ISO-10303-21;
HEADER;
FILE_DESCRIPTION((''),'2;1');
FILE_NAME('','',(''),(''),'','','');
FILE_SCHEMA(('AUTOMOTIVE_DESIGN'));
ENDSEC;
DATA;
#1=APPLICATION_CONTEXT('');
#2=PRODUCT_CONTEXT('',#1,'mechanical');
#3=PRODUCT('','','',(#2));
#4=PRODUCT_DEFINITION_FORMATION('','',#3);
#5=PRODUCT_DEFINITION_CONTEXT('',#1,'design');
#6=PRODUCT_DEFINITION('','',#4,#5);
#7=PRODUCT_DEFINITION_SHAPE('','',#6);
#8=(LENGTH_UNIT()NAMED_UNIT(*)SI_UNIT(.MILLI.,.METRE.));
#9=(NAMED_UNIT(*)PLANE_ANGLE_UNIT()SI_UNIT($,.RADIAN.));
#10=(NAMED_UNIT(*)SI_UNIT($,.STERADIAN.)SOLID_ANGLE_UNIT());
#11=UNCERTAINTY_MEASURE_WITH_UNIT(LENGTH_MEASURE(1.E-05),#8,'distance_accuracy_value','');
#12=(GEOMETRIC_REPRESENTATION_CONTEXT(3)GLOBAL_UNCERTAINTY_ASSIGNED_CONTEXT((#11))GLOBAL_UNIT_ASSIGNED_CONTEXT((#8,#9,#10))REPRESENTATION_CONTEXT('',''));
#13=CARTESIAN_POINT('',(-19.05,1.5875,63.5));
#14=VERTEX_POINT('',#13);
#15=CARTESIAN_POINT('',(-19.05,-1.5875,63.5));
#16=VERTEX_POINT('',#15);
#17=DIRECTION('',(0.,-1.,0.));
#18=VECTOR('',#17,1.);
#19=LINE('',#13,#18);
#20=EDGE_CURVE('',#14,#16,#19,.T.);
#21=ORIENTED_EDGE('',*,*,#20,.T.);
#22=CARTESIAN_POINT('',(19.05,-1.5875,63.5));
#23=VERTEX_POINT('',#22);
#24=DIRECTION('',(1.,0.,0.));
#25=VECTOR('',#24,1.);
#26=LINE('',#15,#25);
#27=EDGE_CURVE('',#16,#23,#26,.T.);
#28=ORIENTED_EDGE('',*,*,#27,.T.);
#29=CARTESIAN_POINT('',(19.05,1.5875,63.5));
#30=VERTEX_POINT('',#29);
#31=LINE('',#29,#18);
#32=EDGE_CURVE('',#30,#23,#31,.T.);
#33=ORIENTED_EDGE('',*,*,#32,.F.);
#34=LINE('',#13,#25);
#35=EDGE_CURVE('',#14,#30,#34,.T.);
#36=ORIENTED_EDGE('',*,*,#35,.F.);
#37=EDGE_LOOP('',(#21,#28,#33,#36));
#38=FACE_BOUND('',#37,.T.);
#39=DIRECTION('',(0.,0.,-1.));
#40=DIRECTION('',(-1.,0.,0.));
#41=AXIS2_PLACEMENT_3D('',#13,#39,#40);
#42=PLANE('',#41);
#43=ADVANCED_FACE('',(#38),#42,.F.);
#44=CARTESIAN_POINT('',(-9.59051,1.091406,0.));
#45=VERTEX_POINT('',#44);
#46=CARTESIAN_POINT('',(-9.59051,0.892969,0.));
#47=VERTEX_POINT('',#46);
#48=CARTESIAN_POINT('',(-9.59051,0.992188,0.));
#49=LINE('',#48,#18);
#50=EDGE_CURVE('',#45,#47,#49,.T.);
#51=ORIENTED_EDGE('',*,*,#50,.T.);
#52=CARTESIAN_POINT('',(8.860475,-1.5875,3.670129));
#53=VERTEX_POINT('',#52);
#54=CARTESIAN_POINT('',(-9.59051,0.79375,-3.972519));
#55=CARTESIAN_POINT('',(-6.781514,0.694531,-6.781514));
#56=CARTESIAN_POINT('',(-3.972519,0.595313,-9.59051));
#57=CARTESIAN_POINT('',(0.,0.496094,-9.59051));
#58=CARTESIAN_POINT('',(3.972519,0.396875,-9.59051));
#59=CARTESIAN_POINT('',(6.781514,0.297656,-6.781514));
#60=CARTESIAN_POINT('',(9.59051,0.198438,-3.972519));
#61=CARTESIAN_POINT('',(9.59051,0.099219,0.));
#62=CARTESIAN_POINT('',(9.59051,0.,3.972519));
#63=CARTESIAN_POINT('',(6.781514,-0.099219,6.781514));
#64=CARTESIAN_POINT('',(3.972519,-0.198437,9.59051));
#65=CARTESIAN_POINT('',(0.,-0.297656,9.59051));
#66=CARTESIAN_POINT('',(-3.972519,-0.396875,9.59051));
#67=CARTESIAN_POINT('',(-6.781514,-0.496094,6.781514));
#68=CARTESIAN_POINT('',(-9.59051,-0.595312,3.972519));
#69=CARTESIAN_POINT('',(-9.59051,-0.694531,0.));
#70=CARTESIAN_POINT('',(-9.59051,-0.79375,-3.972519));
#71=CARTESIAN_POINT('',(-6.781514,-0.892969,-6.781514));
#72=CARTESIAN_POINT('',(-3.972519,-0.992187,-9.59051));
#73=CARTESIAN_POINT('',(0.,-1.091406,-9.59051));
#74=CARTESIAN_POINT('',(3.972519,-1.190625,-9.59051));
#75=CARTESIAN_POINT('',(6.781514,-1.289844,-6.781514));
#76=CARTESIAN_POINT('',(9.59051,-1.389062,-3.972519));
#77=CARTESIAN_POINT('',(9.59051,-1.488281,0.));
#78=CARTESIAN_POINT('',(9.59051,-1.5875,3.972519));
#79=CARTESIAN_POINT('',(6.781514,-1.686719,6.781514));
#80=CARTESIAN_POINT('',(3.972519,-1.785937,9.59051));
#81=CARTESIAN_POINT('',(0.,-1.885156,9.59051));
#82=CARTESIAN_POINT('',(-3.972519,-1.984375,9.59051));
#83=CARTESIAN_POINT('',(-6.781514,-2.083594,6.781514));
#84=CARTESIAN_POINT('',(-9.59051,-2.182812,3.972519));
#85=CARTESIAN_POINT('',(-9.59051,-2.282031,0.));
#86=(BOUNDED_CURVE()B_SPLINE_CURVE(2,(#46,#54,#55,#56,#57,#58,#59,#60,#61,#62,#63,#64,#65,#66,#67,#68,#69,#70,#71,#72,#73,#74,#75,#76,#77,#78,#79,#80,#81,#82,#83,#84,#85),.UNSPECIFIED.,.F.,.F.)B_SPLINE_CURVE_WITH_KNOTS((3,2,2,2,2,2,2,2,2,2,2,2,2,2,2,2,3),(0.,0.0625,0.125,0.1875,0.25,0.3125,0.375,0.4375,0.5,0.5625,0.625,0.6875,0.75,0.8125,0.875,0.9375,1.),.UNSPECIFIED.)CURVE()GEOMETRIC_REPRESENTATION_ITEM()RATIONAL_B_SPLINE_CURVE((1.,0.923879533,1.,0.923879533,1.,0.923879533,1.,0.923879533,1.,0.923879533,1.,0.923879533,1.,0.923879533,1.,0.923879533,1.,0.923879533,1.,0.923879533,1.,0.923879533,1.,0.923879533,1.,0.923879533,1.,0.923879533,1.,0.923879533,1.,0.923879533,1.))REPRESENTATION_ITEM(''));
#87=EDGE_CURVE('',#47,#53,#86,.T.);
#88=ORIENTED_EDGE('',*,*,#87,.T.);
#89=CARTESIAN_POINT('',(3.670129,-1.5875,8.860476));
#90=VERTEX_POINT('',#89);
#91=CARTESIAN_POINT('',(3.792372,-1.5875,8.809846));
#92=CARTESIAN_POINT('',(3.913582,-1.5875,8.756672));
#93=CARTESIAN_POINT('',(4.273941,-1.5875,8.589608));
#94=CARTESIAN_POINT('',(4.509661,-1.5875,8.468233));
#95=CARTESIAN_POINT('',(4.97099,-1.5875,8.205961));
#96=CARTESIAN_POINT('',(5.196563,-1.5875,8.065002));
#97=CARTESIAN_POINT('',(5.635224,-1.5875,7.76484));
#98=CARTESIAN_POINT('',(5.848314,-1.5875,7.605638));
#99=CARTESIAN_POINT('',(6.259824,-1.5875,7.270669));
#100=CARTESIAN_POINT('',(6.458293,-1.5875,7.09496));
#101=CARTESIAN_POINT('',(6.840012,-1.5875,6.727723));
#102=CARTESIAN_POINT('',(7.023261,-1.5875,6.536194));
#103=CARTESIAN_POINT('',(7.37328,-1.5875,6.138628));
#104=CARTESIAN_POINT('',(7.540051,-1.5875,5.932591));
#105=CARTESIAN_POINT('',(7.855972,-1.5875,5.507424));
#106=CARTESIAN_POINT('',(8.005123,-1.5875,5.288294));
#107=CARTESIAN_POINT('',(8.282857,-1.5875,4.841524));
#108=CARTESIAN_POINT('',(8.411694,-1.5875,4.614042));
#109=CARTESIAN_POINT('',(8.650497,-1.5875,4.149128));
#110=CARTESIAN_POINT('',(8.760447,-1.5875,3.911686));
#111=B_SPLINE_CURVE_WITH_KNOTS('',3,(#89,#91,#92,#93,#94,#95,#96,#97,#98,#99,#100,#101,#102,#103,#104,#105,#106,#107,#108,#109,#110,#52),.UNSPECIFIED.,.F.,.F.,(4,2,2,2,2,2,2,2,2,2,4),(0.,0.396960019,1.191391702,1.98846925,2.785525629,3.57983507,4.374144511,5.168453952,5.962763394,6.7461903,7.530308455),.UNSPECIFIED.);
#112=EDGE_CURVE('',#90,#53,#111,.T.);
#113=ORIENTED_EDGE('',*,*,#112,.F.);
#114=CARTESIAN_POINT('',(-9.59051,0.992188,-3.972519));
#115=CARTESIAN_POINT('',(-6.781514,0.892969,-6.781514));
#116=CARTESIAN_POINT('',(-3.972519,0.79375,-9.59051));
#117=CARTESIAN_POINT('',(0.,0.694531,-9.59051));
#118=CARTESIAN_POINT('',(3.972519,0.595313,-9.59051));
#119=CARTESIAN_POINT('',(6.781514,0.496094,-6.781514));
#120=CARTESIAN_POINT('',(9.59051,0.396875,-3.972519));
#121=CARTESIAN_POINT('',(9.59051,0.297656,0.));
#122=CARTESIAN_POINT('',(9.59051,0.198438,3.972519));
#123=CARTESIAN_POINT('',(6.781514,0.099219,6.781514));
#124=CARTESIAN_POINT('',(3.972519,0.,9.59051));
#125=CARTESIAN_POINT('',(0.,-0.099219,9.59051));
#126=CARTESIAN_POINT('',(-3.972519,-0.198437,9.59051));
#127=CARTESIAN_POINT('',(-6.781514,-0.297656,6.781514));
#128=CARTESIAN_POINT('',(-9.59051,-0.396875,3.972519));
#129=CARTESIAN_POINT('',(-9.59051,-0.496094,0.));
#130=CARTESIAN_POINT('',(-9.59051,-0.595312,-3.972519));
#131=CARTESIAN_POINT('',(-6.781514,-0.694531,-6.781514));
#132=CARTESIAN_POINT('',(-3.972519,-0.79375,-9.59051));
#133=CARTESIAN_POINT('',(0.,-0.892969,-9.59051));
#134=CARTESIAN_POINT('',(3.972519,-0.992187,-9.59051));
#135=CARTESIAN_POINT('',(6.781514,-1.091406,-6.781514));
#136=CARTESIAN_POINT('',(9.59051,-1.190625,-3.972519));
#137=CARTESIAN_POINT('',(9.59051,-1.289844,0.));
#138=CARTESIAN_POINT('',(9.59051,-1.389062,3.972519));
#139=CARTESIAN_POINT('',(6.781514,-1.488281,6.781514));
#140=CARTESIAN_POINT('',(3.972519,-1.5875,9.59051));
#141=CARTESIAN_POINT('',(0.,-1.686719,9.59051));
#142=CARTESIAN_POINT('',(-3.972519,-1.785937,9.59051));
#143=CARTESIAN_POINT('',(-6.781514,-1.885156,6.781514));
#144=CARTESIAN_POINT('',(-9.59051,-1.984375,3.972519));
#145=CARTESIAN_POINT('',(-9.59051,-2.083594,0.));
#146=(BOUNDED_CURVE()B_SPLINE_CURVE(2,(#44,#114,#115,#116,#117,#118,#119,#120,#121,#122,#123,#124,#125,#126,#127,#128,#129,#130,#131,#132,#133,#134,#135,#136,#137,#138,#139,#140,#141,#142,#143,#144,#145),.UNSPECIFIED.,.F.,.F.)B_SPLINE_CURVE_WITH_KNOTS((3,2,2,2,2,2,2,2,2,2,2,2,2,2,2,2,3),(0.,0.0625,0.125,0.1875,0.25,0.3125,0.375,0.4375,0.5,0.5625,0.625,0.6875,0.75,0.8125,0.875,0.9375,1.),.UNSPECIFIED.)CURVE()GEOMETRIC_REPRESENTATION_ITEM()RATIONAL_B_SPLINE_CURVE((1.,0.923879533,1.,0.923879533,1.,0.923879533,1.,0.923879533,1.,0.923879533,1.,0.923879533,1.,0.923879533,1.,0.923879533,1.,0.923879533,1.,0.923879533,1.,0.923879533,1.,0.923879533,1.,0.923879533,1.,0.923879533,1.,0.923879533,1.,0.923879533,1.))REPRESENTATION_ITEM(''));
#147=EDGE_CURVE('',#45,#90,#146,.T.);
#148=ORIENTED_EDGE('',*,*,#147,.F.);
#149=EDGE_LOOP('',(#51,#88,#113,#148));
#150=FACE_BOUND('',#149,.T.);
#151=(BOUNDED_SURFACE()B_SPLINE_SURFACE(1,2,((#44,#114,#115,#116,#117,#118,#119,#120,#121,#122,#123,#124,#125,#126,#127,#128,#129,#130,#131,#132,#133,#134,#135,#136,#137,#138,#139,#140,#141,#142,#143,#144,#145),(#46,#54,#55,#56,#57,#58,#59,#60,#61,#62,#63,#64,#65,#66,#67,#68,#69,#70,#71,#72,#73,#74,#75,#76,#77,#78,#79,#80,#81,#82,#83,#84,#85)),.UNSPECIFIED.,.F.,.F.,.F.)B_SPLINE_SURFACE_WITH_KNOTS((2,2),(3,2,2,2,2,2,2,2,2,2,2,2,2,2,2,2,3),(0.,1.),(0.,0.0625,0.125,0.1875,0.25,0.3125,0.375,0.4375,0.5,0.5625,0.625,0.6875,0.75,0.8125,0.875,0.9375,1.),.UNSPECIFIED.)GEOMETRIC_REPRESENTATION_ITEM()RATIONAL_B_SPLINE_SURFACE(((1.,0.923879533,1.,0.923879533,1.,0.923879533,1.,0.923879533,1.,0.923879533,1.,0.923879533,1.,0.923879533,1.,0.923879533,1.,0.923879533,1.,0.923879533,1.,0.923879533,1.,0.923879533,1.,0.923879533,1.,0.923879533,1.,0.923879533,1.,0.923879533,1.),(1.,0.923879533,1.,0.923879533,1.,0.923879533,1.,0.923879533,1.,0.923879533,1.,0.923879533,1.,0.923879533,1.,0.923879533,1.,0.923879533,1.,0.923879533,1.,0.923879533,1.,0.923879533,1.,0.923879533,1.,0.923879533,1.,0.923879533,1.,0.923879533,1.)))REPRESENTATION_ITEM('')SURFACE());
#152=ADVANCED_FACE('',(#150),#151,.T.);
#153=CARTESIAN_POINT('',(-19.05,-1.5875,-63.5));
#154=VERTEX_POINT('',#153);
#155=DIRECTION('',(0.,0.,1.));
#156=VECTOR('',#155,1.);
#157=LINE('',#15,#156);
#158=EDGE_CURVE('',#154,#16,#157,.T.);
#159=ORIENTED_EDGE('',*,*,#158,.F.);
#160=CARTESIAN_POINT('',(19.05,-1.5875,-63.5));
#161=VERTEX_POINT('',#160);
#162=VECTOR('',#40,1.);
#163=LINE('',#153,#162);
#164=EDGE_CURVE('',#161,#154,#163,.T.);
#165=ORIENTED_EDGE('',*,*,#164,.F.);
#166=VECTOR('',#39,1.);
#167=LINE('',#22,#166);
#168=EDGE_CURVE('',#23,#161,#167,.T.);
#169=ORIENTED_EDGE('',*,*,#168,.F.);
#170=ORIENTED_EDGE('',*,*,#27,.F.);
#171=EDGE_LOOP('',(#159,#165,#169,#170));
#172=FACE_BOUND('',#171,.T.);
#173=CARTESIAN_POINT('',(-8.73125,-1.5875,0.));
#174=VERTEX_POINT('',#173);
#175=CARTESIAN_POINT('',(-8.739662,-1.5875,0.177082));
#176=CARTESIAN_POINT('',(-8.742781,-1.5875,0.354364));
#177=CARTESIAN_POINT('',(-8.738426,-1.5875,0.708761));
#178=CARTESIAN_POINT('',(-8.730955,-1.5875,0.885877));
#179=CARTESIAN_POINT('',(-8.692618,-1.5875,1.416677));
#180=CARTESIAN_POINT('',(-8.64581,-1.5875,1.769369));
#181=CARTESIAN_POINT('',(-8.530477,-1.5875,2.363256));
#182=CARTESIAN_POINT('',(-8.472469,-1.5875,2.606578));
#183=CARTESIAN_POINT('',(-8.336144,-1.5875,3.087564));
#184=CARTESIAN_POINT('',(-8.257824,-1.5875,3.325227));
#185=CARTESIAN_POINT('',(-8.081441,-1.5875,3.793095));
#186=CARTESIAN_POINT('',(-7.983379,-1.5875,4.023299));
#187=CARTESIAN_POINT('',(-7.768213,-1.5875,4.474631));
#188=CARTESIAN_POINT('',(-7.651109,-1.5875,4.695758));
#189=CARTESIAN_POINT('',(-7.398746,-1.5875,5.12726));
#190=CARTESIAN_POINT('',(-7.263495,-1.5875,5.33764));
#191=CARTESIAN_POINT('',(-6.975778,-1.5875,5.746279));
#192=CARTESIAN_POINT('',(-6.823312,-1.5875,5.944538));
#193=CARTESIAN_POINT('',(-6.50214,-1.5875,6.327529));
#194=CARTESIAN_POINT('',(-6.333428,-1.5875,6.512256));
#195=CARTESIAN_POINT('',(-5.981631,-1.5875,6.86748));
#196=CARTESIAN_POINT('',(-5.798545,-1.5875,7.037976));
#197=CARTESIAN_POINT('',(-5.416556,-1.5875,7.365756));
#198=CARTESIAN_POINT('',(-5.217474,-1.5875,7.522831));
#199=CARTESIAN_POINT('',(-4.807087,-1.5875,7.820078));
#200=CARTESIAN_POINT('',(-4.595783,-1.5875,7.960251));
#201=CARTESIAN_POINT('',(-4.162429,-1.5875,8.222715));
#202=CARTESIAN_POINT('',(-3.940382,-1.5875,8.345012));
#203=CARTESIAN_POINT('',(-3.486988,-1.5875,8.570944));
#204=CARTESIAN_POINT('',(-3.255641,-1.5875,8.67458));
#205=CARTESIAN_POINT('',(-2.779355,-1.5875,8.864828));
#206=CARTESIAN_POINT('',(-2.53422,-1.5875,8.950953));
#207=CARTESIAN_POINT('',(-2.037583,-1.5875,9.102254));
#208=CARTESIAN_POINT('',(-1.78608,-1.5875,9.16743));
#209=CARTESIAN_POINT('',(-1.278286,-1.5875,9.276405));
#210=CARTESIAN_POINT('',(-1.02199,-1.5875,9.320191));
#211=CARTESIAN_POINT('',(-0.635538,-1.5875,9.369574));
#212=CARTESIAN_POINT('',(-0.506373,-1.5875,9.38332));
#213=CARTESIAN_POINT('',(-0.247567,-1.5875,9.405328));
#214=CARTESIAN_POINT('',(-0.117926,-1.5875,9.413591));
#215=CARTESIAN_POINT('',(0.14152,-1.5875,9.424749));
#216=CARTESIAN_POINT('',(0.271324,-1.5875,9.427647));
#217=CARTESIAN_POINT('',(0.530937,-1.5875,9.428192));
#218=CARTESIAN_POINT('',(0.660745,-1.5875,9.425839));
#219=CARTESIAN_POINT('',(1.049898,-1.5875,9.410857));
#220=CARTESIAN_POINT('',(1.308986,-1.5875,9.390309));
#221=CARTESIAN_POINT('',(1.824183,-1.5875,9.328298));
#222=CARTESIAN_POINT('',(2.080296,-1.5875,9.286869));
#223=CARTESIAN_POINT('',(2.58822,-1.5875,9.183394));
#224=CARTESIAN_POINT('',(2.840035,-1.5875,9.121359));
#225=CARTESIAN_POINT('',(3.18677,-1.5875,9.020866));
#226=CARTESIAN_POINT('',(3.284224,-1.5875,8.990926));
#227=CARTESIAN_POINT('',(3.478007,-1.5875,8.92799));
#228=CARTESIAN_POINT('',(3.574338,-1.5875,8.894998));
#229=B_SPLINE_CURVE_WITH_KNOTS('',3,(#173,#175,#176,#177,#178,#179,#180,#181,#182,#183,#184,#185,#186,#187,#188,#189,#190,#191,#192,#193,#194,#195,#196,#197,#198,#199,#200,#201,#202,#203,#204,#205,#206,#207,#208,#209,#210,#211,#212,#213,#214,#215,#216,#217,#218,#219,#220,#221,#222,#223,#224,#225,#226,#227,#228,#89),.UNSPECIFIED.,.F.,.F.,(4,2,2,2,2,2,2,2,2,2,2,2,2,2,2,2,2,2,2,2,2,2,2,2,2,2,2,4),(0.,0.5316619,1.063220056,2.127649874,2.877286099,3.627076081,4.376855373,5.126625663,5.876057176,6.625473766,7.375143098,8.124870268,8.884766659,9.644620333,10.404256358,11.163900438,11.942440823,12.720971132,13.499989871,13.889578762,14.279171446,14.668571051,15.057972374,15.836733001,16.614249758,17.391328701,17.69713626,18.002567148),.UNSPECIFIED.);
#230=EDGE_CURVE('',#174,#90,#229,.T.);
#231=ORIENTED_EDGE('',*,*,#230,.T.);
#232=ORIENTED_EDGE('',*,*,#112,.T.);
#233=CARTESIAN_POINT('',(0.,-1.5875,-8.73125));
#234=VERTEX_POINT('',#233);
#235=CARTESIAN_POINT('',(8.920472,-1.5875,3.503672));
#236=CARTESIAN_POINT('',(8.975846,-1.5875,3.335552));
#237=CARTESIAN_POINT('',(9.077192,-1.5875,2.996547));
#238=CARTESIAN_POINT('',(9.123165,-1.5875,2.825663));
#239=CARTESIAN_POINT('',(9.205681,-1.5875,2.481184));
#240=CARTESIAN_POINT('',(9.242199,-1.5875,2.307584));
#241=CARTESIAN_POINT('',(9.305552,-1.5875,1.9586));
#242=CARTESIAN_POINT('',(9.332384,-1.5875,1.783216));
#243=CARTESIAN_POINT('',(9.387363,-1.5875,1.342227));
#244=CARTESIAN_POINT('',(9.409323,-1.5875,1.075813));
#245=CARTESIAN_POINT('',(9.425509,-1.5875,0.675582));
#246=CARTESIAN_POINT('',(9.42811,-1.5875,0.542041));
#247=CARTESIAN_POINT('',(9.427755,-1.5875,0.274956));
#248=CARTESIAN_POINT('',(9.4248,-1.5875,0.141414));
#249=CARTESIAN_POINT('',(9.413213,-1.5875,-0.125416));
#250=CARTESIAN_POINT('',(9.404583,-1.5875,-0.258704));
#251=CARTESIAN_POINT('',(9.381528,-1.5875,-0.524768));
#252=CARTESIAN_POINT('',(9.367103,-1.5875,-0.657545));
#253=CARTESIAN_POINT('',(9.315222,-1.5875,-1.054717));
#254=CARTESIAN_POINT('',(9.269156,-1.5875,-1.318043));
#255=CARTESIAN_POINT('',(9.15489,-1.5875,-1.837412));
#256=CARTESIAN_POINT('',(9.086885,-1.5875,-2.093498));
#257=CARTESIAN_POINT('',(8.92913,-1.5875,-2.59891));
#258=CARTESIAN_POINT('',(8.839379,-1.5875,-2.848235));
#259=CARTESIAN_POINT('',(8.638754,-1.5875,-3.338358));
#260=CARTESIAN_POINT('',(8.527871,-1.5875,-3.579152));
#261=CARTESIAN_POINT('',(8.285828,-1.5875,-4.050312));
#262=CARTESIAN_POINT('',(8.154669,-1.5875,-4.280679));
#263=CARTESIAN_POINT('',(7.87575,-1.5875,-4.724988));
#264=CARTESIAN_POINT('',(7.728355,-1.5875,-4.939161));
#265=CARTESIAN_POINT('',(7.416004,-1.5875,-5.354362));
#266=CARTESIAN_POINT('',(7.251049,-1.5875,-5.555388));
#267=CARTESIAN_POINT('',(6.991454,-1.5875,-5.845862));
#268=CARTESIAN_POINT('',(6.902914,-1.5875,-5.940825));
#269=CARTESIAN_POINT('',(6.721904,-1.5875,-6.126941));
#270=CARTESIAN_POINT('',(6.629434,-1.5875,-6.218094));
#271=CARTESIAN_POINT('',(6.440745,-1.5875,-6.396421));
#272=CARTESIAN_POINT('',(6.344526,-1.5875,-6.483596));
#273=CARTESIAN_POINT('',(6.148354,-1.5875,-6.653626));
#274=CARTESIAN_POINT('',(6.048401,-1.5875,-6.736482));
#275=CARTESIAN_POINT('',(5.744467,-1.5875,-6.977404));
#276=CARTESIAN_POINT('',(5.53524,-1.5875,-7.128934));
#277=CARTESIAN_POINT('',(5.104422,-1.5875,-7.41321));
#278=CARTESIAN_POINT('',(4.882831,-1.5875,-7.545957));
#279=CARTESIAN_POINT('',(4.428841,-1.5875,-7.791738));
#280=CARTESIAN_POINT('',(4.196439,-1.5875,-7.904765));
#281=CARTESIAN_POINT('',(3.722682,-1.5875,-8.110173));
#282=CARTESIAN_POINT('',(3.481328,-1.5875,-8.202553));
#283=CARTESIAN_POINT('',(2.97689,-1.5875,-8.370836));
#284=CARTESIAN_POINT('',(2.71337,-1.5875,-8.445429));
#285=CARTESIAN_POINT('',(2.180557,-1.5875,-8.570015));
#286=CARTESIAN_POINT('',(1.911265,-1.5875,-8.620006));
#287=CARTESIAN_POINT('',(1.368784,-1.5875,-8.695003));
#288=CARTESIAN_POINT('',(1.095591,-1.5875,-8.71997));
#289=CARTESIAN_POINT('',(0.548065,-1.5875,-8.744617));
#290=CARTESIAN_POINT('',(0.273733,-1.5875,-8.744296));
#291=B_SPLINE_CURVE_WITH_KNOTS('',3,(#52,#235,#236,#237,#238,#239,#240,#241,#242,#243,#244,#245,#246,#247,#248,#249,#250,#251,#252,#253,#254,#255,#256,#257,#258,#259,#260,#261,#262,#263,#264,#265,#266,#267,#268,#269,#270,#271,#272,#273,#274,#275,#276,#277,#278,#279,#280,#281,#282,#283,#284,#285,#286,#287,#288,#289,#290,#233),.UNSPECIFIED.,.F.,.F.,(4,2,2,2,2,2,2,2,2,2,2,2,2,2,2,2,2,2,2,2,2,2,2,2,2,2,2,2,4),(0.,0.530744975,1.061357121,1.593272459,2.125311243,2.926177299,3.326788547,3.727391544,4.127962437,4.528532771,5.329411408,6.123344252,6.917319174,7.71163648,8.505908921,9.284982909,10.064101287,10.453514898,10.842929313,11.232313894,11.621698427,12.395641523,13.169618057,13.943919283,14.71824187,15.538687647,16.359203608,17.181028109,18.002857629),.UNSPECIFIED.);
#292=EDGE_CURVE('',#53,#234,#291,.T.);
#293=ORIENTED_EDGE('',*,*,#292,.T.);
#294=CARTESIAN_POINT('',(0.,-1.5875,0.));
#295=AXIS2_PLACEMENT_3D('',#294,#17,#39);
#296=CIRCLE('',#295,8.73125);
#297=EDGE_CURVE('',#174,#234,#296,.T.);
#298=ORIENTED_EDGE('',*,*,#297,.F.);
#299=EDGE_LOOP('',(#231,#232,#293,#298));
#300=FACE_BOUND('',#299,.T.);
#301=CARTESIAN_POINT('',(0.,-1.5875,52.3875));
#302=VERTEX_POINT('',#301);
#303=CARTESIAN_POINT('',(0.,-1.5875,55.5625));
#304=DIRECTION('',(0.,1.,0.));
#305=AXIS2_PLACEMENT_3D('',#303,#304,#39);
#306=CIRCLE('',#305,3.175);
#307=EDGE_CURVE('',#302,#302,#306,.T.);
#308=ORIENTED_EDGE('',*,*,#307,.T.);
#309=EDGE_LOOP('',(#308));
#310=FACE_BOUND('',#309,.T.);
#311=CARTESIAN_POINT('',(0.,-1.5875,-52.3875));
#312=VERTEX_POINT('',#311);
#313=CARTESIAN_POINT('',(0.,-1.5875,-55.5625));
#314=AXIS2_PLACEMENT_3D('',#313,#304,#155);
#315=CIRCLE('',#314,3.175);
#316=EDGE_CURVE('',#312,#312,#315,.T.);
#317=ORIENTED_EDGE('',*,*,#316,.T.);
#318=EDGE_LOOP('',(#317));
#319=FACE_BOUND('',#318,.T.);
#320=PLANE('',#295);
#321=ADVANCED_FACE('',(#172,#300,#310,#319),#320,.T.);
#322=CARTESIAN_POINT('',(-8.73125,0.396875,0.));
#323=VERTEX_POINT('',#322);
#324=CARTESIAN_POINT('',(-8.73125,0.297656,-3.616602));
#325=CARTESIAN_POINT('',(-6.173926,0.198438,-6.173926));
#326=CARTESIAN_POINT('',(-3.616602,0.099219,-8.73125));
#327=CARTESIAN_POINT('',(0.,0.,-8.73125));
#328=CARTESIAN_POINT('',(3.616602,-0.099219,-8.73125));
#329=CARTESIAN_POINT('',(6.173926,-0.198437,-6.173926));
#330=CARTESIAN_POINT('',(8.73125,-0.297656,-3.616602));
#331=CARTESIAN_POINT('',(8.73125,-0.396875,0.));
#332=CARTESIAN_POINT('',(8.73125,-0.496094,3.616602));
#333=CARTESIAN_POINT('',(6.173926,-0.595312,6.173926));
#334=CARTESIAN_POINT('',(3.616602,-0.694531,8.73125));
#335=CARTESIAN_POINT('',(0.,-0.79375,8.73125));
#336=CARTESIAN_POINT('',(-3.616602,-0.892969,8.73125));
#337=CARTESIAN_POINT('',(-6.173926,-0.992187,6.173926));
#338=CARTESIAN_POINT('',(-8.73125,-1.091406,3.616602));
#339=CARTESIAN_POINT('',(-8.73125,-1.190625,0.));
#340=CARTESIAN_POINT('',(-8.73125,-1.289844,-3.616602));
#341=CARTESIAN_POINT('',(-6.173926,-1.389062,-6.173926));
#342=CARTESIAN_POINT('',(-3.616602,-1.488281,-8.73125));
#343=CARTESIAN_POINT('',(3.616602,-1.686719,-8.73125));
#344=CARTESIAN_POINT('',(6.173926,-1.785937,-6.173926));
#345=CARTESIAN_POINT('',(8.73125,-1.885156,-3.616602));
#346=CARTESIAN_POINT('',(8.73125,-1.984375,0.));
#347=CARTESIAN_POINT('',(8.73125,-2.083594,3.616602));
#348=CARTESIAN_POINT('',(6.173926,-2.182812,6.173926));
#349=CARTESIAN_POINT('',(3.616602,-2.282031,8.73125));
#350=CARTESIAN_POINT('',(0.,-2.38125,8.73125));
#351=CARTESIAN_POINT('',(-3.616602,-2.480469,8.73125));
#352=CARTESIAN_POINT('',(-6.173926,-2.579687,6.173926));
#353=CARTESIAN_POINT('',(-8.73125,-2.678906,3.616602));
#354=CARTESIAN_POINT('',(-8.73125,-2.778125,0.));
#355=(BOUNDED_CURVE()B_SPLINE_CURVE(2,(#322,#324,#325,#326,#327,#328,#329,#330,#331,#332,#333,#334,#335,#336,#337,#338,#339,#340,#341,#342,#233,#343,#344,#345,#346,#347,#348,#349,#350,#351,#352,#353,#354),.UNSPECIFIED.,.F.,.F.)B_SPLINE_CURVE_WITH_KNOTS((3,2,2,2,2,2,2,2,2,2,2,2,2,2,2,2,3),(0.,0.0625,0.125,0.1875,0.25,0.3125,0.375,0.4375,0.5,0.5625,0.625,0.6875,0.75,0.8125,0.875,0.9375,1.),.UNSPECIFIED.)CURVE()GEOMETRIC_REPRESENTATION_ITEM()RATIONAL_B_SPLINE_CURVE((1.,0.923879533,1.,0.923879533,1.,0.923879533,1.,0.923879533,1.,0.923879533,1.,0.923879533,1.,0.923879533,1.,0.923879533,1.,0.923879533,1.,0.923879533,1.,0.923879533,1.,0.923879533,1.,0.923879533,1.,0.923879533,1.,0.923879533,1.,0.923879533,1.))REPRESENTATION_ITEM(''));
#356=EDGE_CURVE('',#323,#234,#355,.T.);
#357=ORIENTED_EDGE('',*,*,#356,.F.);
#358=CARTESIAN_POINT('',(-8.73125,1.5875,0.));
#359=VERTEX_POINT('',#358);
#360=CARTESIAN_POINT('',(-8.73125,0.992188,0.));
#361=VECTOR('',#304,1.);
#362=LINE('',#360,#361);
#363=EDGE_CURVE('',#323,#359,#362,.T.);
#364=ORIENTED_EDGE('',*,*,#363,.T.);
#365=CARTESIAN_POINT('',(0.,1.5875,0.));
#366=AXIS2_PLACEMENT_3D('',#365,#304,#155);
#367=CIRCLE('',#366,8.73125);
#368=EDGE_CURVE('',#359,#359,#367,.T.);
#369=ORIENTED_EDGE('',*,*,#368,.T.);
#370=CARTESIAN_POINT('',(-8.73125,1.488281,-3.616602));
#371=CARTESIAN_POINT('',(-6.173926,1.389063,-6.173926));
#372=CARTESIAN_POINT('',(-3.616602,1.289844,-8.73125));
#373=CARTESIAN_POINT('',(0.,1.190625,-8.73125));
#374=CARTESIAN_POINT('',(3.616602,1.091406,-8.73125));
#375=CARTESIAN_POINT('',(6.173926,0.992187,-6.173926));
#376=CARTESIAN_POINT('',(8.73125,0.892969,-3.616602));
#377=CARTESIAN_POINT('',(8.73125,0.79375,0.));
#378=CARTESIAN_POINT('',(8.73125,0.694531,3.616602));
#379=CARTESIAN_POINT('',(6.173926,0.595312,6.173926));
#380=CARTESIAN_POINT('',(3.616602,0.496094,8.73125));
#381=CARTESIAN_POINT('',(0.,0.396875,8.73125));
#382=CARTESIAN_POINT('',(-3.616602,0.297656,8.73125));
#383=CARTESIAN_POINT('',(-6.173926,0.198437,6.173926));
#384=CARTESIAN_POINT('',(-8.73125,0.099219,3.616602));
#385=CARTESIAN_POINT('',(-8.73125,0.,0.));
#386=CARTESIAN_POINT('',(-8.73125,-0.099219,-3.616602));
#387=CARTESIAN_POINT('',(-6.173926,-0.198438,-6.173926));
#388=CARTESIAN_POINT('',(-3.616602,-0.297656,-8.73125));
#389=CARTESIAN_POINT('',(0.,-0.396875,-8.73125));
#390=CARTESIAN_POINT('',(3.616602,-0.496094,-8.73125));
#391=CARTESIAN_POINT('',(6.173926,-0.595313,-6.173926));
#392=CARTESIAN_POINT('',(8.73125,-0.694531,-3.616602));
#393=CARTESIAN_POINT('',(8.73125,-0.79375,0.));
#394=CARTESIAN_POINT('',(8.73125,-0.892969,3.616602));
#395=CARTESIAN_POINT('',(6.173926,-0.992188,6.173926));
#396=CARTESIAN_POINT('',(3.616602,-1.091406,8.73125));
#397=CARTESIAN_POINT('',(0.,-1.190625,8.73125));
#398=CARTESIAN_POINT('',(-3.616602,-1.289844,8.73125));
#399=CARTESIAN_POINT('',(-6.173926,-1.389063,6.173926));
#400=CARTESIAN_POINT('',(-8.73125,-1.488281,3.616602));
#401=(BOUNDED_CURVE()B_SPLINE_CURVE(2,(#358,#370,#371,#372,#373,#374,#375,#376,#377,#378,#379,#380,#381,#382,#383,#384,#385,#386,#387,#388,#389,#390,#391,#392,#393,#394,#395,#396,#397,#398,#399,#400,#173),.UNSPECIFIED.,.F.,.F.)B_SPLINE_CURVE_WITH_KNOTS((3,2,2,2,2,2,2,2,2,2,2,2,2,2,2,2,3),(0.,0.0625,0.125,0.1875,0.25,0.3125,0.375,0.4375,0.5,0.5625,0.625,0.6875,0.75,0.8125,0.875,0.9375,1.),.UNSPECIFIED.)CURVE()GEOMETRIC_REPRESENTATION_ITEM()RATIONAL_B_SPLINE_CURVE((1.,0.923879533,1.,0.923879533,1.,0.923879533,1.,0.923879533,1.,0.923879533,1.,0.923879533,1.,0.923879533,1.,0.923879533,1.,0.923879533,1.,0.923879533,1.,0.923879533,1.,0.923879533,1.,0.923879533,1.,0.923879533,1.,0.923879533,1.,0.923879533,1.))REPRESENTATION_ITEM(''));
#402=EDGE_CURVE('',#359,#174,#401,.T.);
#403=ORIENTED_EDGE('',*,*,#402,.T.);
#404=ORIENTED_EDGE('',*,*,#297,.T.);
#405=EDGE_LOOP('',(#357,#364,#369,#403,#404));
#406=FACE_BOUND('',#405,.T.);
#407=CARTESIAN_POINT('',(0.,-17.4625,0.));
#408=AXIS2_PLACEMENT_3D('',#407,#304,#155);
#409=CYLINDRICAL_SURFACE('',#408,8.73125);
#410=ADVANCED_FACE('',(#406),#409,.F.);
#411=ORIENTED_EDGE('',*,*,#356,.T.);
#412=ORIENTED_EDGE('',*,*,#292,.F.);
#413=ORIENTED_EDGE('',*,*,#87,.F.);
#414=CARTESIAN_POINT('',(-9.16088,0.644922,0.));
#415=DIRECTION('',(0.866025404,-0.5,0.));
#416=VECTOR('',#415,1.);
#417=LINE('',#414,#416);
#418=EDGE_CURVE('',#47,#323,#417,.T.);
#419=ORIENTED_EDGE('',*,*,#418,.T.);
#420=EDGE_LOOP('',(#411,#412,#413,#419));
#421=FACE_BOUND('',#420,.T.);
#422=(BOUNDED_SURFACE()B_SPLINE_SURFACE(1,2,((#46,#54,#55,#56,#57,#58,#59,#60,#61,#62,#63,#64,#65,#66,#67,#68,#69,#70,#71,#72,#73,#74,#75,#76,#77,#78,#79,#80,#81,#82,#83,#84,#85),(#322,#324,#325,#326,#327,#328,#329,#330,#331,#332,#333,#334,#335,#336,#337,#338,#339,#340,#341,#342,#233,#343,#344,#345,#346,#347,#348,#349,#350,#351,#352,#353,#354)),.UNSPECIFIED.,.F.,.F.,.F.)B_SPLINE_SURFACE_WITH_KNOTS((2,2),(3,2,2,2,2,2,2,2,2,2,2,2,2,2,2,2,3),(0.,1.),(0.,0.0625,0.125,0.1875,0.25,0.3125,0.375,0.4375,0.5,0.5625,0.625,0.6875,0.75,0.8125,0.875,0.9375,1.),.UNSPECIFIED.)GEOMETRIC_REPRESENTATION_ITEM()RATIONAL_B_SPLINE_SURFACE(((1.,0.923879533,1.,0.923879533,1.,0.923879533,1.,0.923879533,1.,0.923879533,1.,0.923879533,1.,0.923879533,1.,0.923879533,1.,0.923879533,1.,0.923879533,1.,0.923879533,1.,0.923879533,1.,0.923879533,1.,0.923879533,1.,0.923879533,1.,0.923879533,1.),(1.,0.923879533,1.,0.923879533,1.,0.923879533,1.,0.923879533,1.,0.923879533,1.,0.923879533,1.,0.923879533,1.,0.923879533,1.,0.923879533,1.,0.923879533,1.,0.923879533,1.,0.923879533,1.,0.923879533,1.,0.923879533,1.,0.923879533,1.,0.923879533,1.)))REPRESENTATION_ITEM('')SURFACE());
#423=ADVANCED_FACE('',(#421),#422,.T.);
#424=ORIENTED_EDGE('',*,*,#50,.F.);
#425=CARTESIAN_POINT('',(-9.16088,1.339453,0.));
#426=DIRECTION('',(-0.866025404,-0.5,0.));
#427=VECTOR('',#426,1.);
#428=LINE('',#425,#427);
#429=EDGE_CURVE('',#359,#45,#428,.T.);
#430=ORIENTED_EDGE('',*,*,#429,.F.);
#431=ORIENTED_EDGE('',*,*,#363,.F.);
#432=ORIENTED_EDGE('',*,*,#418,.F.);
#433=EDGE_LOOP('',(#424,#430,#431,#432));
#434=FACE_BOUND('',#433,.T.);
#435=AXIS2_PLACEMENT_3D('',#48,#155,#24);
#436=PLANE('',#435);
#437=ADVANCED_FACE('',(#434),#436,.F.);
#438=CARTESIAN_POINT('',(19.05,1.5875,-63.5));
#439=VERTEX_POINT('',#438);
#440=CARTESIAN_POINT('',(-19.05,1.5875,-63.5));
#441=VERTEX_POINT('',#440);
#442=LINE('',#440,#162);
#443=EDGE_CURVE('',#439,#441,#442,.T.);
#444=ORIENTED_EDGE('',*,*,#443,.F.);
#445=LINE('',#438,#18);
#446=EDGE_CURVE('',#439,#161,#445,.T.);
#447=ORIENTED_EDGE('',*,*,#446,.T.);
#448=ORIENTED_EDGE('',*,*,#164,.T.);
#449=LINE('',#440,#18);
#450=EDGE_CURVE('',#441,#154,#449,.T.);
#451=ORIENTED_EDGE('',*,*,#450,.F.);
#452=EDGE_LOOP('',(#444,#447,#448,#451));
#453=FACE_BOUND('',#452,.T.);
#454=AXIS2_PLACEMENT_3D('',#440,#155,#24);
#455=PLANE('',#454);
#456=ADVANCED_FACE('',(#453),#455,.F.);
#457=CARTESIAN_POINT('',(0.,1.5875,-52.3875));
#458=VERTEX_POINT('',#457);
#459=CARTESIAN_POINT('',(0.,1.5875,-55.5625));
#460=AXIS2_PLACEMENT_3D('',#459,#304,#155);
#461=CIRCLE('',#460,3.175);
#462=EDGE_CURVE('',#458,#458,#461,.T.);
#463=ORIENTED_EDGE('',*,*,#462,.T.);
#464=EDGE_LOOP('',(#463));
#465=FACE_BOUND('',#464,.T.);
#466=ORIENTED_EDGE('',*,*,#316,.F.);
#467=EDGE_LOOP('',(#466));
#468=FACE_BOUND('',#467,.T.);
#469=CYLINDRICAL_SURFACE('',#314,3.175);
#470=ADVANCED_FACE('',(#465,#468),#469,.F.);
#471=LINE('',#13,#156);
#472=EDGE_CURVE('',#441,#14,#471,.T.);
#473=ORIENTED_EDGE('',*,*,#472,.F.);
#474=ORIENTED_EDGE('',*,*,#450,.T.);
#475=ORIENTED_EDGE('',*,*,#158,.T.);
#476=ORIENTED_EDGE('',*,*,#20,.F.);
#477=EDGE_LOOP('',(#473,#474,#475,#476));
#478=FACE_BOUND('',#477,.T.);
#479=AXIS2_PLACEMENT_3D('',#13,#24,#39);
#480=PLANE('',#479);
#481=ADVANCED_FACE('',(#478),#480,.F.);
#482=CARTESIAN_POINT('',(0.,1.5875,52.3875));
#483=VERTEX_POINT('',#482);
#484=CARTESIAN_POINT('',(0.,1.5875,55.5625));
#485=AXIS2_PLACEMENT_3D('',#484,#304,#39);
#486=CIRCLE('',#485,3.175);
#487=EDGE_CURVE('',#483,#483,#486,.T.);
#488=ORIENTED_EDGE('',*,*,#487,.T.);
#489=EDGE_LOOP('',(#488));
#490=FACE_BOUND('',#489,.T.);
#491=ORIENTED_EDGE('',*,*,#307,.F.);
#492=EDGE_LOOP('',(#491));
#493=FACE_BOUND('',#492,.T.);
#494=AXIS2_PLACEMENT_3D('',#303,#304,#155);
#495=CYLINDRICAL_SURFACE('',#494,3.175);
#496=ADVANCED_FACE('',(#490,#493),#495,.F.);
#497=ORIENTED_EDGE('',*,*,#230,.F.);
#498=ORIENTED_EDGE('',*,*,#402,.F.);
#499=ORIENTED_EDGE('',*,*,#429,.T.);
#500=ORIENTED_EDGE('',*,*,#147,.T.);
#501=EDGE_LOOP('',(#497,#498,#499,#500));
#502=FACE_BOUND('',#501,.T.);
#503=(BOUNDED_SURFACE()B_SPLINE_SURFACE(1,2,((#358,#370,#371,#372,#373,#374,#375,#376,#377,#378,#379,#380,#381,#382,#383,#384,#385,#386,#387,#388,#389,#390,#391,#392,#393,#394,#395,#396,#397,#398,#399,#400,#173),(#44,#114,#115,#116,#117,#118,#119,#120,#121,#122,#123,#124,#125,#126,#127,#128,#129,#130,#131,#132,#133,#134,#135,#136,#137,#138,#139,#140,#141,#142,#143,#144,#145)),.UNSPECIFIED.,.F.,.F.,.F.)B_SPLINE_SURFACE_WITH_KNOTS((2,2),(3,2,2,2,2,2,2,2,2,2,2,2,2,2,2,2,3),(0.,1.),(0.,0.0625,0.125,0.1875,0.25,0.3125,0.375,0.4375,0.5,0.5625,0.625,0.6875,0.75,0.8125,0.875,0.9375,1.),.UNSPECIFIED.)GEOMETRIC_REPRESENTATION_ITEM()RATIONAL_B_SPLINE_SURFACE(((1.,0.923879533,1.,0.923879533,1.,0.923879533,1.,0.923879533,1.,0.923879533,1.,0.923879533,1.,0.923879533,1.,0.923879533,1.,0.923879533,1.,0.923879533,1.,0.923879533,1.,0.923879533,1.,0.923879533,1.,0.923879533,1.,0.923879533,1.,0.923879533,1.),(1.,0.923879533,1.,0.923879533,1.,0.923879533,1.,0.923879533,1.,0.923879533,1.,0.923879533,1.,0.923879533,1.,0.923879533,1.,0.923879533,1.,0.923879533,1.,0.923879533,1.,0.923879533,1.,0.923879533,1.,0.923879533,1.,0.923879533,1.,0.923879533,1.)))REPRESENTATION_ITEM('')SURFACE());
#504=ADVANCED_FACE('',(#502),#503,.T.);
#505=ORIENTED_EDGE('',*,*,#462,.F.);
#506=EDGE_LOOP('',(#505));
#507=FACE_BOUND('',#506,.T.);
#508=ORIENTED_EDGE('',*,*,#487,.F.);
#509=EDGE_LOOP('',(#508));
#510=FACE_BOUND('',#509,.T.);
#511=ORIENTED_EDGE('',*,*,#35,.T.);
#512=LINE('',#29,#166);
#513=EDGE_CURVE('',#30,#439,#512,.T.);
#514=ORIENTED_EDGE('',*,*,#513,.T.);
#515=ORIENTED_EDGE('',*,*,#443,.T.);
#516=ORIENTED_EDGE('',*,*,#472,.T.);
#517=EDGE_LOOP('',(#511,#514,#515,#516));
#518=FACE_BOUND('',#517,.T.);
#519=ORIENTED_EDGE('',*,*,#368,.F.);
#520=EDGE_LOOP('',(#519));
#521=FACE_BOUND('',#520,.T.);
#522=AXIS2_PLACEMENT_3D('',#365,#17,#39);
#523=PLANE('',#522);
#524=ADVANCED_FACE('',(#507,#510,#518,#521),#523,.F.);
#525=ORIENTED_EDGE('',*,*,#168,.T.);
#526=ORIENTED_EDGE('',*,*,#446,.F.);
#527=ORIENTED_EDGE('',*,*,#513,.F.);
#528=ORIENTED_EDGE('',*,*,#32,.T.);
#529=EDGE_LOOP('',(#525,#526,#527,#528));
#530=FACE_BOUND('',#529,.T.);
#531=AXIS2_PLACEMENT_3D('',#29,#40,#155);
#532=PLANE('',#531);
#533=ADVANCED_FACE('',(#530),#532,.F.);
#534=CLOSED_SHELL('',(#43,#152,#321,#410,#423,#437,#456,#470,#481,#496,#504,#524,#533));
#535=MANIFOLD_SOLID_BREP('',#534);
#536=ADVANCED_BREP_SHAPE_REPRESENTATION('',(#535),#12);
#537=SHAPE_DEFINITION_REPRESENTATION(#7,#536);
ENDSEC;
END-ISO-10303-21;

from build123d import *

# Parameters (mm, degrees)
SKETCH1_W           = 38.1
SKETCH1_H           = 127
BOSS_EXTRUDE1_DEPTH = 1.5875
SKETCH2_R           = 8.73125
CUT_EXTRUDE1_DEPTH  = 19.05
SKETCH3_R           = 3.175
CUT_EXTRUDE2_DEPTH  = 3.175
THREAD1_PITCH       = 1.5875


with BuildPart() as part:
    # Sketch1 → Boss-Extrude1 (new, symmetric)
    with BuildSketch(Plane(origin=(0, 0, 0), x_dir=(1, 0, 0), z_dir=(0, 1, 0))):
        Rectangle(SKETCH1_W, SKETCH1_H)
    extrude(amount=BOSS_EXTRUDE1_DEPTH, both=True)

    # Sketch2 → Cut-Extrude1 (cut)
    with BuildSketch(Plane(origin=(0, 1.5875, 0), x_dir=(1, 0, 0), z_dir=(0, 1, 0))):
        with Locations(Location((0, 0, 0), (0, 0, 270))):
            Circle(SKETCH2_R)
    extrude(amount=-CUT_EXTRUDE1_DEPTH, mode=Mode.SUBTRACT)

    # Sketch3 → Cut-Extrude2 (cut)
    with BuildSketch(Plane(origin=(0, 1.5875, 0), x_dir=(1, 0, 0), z_dir=(0, 1, 0))):
        with Locations(Location((0, 55.5625, 0), (0, 0, 270))):
            Circle(SKETCH3_R)
        with Locations(Location((0, -55.5625, 0), (0, 0, 90))):
            Circle(SKETCH3_R)
    extrude(amount=-CUT_EXTRUDE2_DEPTH, mode=Mode.SUBTRACT)

    # Thread1: the profile of Thread Profile1 profile screwed along a right-hand helix of 2 turns, 8 arcs to a turn; built about Z, then put on its axis
    thread1_z = Axis((0, 0, 0), (0, 0, 1))
    thread1_corners = [(8.73095, 0, -0.000173205), (9.590509577, 0, 0.496093748), (9.590509577, 0, 0.694531248), (8.73095, 0, 1.190798201)]
    with BuildLine(mode=Mode.PRIVATE) as thread1_profile:
        Line(thread1_corners[0], thread1_corners[1])
        Line(thread1_corners[1], thread1_corners[2])
        Line(thread1_corners[2], thread1_corners[3])
        Line(thread1_corners[3], thread1_corners[0])
    thread1_cap = Face(thread1_profile.wire())
    thread1_turn_angles = [0, 22.5, 45, 67.5, 90, 112.5, 135, 157.5, 180, 202.5, 225, 247.5, 270, 292.5, 315, 337.5, 360]
    thread1_turn_weights = [1, 0.9238795325112867, 1, 0.9238795325112867, 1, 0.9238795325112867, 1, 0.9238795325112867, 1, 0.9238795325112867, 1, 0.9238795325112867, 1, 0.9238795325112867, 1, 0.9238795325112867, 1]
    thread1_turn_rails = [Edge.make_bspline([Vector(p[0], p[1], 0).rotate(thread1_z, thread1_turn_angles[k]) / thread1_turn_weights[k] + Vector(0, 0, p[2] + THREAD1_PITCH * thread1_turn_angles[k] / 360) for k in range(17)], [0, 0, 0, 1, 1, 2, 2, 3, 3, 4, 4, 5, 5, 6, 6, 7, 7, 8, 8, 8], 2, thread1_turn_weights) for p in thread1_corners]
    thread1_turn_sides = [Face.make_surface_from_curves(thread1_turn_rails[p[0]], thread1_turn_rails[p[1]]) for p in [(0, 1), (1, 2), (2, 3), (3, 0)]]
    thread1 = Plane(origin=(0, 1.5875, 0), x_dir=(-1, 0, 0), z_dir=(0, -1, 0)) * Solid(Shell([*[p.moved(Location((0, 0, THREAD1_PITCH * i))) for i in range(2) for p in thread1_turn_sides], thread1_cap, thread1_cap.rotate(thread1_z, 720).moved(Location((0, 0, THREAD1_PITCH * 720 / 360)))]))
    add(thread1, mode=Mode.SUBTRACT)


solid = part.part
